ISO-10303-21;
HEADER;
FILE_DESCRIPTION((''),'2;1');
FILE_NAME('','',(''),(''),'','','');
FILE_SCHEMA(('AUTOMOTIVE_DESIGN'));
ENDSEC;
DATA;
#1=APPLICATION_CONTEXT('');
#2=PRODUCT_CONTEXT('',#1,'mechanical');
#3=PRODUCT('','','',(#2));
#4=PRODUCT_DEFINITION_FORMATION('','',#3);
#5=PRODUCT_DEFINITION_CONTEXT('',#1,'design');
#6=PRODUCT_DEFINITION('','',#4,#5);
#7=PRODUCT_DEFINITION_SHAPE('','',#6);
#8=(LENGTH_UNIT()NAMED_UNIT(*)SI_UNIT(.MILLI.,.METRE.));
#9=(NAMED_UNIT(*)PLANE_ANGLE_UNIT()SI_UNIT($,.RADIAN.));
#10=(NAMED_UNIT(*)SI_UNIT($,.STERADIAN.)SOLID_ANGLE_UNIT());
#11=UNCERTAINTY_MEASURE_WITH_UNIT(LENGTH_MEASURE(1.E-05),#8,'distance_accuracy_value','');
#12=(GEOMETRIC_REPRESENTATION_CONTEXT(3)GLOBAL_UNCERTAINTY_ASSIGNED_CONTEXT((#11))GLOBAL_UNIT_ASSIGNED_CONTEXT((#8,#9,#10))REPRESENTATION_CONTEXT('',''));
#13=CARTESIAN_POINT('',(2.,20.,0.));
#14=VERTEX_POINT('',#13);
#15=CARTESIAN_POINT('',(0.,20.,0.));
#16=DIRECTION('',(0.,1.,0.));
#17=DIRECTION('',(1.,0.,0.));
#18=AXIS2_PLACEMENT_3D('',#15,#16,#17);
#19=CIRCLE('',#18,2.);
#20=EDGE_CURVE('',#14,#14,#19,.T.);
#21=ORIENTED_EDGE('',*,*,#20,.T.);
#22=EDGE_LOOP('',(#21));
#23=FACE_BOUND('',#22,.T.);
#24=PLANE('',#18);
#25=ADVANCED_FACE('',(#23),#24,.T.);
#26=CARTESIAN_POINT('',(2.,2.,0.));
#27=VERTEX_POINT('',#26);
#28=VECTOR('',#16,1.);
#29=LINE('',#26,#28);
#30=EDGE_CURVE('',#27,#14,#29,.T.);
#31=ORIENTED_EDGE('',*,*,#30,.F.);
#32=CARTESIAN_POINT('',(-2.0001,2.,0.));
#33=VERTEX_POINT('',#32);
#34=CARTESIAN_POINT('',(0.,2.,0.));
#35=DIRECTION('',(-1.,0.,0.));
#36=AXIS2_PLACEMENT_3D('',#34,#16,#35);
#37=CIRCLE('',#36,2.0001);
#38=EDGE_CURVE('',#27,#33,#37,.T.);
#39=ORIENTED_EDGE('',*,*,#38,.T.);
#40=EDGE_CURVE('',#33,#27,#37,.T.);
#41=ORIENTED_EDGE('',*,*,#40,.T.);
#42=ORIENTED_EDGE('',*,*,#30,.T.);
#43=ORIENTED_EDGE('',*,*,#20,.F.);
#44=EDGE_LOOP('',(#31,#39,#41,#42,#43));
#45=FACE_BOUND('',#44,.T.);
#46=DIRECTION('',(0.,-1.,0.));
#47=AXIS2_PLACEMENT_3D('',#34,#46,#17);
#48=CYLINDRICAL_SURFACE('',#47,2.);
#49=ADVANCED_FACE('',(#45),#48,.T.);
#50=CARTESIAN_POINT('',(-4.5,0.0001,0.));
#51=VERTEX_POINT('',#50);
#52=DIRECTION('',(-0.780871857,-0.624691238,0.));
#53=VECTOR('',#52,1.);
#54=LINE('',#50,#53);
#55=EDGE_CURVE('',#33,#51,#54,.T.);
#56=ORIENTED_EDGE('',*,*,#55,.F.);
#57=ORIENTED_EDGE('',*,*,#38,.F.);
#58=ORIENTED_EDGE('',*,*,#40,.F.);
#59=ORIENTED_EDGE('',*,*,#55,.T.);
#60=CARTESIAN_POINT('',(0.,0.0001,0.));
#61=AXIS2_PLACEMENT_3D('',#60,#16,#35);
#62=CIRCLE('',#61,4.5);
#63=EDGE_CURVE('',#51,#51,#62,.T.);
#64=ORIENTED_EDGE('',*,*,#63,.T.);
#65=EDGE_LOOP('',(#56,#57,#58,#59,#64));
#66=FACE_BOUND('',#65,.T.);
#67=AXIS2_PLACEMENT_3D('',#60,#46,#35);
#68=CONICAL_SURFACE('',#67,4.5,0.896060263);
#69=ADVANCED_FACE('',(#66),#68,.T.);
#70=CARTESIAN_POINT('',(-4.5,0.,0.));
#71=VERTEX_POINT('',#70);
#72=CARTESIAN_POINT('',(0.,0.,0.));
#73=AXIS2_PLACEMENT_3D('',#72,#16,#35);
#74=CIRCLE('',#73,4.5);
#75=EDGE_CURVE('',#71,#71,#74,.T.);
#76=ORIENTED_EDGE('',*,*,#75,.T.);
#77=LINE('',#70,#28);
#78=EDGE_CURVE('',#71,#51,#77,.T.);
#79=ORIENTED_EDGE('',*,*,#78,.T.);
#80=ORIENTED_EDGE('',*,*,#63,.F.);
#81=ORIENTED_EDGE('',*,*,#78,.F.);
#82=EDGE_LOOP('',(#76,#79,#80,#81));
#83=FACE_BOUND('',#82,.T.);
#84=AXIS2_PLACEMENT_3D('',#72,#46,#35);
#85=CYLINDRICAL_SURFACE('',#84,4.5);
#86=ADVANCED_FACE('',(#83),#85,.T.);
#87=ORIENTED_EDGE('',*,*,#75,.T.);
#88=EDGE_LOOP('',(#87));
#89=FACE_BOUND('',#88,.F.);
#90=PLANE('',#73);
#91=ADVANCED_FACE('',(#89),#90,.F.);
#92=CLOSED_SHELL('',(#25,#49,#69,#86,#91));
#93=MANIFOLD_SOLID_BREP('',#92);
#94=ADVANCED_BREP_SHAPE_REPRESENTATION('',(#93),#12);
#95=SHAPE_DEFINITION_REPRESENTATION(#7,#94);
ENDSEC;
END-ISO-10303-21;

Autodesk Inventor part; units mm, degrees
ref_plane "YZ Plane" through (0, 0, 0) normal (1, 0, 0) x (0, 1, 0)
ref_plane "XZ Plane" through (0, 0, 0) normal (0, 1, 0) x (-1, 0, 0)
ref_plane "XY Plane" through (0, 0, 0) normal (0, 0, 1) x (1, 0, 0)
sketch "Sketch1" plane through (0, 0, 0) normal (0, 1, 0) x (-1, 0, 0)
  circle A0 centre (0, 0) radius 4.5
  dimension "d0" = 9
extrude "Extrusion1" add sketch "Sketch1" along normal blind 2
chamfer "Chamfer1" distance 2.5 distance2 2 1 edges at (4.5, 2, 0) measured on face at (-0.1808, 2, 1.316)
sketch "Sketch2" plane through (0, 2, 0) normal (0, 1, 0) x (1, 0, 0)
  circle A0 centre (0, 0) radius 2 projected
extrude "Extrusion2" add sketch "Sketch2" along normal blind 18
properties part number "pulley screw"
